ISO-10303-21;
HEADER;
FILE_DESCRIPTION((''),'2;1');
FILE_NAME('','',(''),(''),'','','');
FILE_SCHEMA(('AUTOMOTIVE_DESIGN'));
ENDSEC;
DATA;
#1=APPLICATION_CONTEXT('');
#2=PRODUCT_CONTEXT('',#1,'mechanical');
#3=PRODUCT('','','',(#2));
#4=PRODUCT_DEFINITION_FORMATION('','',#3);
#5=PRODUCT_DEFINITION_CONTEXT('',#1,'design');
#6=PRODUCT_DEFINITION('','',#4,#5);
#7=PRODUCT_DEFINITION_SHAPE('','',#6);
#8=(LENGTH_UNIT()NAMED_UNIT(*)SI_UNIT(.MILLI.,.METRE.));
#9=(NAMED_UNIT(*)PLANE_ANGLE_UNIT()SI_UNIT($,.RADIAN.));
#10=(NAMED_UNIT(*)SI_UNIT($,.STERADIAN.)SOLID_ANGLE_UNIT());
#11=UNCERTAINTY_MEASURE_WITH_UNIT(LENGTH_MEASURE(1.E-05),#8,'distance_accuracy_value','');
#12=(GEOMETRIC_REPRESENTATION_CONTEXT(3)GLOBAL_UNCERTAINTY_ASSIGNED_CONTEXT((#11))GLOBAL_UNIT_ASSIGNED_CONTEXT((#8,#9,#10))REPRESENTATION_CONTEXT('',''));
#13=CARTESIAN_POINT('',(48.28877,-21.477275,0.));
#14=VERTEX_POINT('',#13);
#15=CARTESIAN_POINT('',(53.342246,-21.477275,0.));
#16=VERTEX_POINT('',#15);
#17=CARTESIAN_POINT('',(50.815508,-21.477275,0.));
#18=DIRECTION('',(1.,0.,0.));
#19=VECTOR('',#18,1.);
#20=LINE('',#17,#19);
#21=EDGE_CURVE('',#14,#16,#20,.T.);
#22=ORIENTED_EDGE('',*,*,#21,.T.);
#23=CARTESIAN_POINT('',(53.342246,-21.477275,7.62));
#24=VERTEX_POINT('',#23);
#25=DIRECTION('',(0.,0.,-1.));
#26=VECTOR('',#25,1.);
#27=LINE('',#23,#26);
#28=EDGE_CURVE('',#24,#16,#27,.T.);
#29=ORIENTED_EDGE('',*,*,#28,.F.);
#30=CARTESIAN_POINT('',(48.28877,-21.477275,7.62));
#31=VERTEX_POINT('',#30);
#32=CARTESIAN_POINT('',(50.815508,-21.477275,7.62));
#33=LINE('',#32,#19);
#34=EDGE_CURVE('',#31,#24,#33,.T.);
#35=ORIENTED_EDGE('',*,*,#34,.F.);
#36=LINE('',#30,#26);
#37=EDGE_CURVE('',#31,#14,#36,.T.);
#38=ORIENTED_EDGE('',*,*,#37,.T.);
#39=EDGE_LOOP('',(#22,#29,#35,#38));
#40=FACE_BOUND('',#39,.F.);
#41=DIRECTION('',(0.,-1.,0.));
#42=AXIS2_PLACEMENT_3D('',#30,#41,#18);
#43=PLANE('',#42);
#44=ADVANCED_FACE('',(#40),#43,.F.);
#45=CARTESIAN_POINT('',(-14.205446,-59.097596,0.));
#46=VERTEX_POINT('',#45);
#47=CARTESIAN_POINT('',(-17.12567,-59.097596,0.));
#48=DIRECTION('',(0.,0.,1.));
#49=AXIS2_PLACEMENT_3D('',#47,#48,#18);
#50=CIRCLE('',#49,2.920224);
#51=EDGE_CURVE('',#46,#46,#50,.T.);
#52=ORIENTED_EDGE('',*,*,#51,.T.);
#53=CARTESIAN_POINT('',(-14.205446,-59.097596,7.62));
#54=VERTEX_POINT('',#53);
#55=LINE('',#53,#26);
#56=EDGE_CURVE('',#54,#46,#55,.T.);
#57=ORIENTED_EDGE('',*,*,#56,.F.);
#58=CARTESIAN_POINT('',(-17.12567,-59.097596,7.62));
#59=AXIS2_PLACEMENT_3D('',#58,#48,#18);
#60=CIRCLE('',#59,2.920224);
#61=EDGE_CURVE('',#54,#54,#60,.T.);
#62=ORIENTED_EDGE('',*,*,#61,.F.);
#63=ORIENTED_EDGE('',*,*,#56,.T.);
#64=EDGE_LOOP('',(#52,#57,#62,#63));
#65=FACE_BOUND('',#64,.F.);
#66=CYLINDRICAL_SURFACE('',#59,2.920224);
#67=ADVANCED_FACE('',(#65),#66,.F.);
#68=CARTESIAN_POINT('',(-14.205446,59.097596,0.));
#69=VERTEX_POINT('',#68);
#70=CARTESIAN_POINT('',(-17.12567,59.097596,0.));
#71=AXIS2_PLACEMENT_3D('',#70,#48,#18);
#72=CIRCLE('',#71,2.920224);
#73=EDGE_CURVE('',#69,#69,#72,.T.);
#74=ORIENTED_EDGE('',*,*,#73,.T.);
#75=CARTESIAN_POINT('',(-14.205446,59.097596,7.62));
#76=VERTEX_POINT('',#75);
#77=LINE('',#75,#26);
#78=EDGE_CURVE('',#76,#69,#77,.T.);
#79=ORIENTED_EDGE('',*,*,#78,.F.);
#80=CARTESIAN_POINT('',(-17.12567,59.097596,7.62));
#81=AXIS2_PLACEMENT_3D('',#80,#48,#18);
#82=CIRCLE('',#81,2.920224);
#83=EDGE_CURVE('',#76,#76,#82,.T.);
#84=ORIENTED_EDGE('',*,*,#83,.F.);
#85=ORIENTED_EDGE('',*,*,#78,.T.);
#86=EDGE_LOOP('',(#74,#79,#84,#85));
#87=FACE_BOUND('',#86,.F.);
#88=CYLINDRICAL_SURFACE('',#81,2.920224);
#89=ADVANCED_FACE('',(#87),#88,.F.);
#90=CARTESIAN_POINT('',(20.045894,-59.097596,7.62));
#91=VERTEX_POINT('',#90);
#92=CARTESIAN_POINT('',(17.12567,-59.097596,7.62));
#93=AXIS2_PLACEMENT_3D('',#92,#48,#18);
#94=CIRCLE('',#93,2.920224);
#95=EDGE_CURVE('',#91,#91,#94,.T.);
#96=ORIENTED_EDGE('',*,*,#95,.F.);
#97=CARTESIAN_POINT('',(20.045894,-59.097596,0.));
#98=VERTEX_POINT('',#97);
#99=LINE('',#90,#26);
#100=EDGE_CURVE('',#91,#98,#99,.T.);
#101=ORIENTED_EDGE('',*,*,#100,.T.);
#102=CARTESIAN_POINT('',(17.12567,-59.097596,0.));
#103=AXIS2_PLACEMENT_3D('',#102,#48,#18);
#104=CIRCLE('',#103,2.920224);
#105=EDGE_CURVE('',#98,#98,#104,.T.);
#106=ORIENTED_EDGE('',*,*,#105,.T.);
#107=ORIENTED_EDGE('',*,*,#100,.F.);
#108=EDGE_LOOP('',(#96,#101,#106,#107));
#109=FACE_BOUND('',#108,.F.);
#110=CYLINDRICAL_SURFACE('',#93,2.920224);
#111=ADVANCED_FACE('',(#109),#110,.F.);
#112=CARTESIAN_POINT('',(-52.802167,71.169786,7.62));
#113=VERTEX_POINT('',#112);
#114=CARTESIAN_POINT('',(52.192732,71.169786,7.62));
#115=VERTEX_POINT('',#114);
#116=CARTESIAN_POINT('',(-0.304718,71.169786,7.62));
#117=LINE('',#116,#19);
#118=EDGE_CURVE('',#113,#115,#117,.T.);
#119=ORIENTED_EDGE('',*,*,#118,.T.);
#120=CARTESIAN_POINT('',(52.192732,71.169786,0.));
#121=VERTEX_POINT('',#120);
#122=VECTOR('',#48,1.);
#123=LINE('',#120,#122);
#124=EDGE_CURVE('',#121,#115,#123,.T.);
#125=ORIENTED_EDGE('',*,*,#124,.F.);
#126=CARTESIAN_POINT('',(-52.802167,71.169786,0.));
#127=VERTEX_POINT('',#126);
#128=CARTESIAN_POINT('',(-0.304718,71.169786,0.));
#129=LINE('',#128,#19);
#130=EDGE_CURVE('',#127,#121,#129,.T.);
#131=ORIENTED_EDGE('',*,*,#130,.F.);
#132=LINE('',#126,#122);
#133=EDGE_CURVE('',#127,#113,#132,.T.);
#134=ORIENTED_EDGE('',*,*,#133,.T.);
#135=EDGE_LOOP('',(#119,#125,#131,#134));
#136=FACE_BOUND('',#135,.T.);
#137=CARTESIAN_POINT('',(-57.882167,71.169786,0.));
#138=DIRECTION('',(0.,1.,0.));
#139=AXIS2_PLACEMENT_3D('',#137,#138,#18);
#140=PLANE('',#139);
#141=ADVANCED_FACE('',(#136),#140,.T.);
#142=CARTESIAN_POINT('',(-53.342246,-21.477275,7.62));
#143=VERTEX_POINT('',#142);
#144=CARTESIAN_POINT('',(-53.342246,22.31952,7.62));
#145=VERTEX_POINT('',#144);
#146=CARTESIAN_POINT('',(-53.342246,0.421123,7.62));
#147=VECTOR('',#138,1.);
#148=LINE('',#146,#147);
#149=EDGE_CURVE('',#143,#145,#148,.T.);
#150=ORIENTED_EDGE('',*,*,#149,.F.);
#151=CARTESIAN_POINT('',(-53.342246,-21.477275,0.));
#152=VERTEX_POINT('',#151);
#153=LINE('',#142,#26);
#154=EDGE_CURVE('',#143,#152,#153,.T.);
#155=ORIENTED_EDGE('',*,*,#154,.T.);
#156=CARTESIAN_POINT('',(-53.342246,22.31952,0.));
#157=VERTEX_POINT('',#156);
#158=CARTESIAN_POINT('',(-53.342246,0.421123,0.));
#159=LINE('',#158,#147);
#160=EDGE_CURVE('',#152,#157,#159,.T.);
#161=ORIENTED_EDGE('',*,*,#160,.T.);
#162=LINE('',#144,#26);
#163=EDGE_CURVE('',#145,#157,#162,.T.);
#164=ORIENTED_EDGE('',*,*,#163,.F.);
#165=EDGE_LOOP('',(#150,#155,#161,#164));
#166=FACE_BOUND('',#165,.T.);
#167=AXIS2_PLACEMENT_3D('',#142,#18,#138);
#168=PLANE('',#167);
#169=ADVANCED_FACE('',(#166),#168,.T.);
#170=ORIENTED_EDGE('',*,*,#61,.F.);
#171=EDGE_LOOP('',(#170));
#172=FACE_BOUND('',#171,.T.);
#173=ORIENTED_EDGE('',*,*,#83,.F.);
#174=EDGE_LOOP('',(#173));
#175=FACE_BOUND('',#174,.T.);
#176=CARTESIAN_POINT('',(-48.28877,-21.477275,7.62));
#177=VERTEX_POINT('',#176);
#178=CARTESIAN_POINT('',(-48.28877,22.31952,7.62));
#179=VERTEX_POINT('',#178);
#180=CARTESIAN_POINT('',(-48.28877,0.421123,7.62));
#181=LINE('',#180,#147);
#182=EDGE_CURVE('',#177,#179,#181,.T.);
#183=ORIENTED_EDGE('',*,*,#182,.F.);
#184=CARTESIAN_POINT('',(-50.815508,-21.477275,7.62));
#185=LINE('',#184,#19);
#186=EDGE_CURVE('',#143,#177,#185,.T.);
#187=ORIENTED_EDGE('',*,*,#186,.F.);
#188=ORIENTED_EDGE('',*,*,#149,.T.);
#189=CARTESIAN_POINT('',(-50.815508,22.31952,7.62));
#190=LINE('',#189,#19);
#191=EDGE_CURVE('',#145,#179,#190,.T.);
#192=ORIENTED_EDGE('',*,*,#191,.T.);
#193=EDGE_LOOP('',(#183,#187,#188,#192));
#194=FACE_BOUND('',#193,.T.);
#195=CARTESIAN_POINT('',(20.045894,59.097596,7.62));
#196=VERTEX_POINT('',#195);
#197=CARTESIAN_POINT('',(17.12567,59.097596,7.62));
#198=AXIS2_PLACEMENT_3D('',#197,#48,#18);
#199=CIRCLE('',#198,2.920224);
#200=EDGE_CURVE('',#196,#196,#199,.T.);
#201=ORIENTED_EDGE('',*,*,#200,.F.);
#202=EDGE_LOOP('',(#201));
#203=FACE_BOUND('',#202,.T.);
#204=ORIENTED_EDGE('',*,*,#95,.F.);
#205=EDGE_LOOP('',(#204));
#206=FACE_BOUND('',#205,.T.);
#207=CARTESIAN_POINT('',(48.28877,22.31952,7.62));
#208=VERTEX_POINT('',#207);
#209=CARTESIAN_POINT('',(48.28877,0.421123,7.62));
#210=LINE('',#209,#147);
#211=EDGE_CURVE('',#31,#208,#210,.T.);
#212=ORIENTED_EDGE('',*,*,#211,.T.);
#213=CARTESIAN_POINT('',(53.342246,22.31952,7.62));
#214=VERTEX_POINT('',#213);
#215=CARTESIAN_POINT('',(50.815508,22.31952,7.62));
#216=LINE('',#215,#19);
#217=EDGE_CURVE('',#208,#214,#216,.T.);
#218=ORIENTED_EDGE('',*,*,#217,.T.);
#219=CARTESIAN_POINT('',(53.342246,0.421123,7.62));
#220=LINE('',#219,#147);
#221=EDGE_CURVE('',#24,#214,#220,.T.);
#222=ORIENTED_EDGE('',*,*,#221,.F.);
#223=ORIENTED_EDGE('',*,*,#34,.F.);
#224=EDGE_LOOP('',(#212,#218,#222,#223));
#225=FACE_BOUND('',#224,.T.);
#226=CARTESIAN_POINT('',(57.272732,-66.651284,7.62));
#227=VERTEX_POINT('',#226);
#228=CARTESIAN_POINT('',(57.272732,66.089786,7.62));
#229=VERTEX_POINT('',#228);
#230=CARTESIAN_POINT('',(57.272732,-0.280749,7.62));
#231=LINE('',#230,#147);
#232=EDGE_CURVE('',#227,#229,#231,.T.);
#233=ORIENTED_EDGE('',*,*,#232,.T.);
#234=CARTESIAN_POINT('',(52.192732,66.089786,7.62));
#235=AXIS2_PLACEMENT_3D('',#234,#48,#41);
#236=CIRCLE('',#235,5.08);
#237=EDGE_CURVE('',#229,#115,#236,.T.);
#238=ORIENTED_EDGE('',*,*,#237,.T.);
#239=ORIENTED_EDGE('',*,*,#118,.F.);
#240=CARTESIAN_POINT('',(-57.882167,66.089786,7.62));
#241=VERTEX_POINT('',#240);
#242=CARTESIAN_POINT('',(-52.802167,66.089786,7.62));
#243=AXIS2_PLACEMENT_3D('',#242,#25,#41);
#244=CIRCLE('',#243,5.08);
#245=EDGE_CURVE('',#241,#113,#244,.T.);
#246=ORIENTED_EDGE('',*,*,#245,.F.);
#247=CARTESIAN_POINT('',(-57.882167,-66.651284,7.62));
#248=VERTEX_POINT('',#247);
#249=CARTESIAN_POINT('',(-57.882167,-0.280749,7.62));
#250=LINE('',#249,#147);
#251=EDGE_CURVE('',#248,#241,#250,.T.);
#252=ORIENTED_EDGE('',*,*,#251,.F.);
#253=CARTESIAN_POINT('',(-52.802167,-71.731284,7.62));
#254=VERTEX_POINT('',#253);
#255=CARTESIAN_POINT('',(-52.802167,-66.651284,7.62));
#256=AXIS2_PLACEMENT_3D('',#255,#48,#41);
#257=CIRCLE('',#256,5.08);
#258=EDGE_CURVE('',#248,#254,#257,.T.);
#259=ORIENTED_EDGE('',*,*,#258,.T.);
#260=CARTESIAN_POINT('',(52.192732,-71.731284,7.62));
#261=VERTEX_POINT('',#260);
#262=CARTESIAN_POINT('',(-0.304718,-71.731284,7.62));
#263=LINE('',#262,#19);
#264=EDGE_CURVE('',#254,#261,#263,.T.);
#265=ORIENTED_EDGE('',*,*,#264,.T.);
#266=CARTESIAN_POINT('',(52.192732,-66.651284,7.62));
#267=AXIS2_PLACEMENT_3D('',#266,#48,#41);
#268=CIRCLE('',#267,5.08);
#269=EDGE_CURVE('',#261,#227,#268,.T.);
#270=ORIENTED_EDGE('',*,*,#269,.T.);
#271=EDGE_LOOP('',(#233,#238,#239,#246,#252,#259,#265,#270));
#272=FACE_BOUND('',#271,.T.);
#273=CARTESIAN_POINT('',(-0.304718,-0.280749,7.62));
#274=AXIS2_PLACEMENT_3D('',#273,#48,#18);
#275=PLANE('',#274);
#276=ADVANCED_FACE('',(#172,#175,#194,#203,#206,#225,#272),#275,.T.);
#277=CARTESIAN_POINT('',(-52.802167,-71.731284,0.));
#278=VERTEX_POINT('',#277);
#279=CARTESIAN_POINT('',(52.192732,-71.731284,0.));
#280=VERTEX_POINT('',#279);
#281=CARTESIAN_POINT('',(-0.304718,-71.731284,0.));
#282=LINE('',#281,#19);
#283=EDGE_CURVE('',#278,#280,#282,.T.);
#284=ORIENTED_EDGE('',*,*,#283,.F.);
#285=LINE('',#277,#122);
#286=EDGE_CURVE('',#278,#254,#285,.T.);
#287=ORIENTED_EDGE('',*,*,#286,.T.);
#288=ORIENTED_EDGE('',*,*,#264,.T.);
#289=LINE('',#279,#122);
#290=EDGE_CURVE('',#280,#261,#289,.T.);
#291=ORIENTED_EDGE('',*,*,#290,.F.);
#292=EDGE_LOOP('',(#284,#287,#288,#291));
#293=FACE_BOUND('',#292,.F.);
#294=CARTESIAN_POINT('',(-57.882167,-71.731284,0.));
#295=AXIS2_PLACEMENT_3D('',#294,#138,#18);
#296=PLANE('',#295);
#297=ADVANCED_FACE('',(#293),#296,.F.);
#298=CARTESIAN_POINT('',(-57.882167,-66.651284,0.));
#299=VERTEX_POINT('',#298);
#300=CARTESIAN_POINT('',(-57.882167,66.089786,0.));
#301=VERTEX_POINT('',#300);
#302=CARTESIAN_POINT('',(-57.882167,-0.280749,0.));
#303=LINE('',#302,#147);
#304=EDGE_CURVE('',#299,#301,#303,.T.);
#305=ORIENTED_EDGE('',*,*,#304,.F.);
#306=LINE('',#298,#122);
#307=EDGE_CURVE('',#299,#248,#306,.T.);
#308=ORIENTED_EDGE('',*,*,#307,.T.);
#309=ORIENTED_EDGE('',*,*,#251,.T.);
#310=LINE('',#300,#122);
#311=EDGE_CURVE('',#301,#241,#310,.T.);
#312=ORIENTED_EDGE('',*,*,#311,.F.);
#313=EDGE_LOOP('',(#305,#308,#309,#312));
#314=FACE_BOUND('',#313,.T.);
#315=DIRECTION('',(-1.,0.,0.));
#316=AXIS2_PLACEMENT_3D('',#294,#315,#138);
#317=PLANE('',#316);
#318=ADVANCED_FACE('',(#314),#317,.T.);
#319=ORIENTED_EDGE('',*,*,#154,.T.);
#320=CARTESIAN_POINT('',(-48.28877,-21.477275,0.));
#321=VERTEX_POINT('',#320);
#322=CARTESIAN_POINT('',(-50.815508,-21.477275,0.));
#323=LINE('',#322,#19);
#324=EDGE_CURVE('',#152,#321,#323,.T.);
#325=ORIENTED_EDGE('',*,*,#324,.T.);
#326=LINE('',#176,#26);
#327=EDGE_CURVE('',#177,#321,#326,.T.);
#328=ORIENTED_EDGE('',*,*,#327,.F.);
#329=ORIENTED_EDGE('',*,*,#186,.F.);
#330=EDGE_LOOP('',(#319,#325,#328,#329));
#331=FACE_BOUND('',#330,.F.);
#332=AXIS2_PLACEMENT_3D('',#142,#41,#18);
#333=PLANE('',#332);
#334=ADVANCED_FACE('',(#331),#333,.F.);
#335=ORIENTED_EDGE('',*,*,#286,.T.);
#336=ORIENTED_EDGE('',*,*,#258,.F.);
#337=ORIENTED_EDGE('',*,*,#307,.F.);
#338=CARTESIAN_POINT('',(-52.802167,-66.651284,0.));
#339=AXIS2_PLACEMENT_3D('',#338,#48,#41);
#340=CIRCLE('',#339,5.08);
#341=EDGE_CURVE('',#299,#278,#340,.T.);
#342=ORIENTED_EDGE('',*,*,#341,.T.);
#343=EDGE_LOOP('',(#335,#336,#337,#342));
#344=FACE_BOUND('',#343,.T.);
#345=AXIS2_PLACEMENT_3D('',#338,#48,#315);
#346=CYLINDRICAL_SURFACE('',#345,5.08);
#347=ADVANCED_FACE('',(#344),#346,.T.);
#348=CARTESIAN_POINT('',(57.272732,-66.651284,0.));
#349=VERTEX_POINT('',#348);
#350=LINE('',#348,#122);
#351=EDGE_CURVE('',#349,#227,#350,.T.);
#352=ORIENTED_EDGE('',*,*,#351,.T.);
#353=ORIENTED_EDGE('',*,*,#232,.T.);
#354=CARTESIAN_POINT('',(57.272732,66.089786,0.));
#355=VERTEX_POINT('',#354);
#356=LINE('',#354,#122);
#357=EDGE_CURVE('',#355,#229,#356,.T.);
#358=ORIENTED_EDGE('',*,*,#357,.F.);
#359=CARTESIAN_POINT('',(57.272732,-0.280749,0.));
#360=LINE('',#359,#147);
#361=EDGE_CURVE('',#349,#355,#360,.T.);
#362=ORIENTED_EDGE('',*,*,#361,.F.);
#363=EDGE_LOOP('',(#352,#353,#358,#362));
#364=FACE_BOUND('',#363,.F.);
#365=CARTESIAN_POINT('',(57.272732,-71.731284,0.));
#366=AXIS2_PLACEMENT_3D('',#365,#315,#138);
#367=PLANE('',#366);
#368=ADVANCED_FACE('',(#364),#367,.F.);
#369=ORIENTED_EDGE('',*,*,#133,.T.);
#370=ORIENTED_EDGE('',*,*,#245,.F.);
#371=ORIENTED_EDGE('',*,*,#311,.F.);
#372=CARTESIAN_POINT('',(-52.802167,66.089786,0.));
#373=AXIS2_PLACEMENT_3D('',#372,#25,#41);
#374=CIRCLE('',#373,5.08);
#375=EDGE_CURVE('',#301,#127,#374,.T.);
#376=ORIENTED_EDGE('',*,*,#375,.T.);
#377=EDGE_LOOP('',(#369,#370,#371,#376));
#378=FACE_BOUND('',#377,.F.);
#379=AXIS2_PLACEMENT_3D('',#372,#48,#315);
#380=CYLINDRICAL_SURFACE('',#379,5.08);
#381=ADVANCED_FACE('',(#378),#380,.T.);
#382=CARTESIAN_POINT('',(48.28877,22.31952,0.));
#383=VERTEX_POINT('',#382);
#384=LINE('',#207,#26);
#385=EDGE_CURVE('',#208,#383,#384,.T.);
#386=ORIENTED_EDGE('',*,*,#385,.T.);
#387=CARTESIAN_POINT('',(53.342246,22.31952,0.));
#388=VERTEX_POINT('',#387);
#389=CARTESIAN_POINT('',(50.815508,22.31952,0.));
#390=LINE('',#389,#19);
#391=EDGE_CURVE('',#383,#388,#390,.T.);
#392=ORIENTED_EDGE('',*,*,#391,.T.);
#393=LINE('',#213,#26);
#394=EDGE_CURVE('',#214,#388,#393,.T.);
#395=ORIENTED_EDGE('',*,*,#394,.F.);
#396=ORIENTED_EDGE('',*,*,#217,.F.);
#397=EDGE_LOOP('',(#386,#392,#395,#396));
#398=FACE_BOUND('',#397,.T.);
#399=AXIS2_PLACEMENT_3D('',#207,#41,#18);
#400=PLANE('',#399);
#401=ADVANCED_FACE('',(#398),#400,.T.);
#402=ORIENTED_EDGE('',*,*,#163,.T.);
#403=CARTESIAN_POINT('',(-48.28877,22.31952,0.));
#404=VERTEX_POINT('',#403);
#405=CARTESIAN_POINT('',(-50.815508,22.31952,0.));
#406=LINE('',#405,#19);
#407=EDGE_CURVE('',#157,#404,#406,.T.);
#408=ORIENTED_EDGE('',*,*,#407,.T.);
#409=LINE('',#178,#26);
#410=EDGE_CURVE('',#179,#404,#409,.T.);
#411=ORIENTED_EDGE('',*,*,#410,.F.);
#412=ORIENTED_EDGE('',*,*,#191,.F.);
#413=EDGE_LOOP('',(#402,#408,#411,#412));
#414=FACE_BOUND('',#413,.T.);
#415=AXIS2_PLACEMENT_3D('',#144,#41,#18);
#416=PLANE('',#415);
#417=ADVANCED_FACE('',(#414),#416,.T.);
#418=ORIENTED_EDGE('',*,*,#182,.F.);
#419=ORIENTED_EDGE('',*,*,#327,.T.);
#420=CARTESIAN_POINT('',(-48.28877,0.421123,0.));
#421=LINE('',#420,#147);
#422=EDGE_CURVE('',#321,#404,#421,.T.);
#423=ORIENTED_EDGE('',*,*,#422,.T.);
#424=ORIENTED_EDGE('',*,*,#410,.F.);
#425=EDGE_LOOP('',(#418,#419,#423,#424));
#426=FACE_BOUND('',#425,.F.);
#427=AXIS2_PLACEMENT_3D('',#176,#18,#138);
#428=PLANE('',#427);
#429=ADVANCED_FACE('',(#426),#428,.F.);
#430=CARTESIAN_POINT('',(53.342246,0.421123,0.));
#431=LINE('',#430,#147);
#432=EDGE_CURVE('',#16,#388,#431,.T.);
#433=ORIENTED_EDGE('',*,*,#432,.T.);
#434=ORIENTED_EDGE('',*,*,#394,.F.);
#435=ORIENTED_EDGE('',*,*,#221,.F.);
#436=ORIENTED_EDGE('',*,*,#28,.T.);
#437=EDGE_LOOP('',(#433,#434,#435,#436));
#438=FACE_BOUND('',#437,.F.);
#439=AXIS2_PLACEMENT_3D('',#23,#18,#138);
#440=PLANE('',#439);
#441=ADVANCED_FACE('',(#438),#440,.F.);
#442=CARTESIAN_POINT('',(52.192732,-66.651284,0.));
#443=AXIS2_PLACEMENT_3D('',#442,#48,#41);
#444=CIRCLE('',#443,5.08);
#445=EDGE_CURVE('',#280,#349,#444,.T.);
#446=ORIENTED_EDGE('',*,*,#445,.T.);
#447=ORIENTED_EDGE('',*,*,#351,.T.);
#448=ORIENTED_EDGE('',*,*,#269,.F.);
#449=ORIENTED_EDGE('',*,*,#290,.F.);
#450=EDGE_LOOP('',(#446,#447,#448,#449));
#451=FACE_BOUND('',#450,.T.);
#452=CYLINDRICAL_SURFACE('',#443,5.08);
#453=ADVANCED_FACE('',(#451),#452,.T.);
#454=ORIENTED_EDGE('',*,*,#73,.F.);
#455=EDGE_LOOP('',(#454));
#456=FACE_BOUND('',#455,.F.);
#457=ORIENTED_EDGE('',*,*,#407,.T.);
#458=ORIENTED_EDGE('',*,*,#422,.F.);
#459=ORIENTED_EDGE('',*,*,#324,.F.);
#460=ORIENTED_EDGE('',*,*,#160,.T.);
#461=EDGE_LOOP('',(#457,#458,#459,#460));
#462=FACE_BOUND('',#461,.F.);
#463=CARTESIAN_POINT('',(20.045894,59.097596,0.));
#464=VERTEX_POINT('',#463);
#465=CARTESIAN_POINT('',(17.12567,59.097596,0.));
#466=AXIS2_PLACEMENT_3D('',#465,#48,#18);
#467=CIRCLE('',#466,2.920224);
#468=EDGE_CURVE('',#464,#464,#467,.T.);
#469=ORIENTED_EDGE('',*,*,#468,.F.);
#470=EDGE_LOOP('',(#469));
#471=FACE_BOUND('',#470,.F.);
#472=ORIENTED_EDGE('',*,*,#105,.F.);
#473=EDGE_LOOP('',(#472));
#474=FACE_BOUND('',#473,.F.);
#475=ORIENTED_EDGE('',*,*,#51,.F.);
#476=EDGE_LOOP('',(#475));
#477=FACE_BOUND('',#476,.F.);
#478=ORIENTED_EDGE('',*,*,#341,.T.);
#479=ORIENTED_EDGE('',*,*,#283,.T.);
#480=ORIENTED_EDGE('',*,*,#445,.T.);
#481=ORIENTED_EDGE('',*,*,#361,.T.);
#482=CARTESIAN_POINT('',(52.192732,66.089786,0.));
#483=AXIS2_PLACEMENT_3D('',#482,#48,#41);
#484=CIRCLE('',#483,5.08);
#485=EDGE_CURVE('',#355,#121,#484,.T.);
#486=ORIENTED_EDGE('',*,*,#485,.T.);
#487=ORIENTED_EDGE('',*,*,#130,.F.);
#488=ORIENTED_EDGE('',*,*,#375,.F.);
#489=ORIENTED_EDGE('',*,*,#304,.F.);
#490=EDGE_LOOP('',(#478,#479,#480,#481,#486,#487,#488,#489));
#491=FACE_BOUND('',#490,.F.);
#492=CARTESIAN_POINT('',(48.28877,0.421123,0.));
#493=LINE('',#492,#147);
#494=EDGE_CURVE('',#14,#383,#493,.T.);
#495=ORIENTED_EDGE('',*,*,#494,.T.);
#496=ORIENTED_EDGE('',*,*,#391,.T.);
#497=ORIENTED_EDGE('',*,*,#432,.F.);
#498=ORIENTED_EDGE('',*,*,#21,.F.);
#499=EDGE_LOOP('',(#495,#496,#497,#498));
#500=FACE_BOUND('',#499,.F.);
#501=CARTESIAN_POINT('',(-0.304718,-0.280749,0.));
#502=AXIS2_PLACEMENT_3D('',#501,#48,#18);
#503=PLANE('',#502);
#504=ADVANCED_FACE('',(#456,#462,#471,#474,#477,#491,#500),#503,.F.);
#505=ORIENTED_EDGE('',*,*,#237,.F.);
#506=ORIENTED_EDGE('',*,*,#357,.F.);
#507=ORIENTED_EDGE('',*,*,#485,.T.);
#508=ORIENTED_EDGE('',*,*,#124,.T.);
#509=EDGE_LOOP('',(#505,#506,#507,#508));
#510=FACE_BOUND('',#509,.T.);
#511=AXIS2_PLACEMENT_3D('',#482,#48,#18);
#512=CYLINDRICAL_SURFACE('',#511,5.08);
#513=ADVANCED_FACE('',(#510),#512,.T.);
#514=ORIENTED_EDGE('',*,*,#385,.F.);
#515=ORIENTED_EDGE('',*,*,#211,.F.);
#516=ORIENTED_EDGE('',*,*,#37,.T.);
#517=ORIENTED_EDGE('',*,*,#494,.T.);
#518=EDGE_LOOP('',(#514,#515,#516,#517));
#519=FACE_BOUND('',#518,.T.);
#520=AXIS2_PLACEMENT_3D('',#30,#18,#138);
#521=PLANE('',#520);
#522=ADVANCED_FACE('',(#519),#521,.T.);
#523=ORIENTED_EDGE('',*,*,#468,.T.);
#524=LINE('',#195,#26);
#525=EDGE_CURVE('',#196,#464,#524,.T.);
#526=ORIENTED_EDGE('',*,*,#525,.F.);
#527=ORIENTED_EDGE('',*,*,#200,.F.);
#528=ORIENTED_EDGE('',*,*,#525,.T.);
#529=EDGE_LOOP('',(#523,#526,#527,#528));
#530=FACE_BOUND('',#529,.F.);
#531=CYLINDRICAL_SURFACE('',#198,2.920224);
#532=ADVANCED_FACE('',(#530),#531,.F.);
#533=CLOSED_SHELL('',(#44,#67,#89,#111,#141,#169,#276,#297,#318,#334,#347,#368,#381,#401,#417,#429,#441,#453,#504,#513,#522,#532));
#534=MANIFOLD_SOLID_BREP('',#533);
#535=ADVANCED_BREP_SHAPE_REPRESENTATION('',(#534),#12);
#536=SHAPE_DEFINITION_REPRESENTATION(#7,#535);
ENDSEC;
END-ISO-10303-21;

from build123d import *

# Parameters (mm, degrees)
F0_W     = 115.1548996568
F0_H     = 142.901070416
F1_DEPTH = 7.62
F2_R     = 5.08
F3_W     = 5.0534754992
F3_H     = 43.796794489
F3_R     = 2.9202239124
F4_DEPTH = 7.62


# Not quite as in the source:
# - a feature names something its author has since deleted; it is built from what else it names


with BuildPart() as f1:
    # F0 (on Top) → F1 (new body)
    with BuildSketch(Plane.XY):
        with Locations((-0.3047175705, -0.2807490528)):
            Rectangle(F0_W, F0_H)
    extrude(amount=F1_DEPTH)

    # F2
    f2_edges = [f1.edges().sort_by_distance(p)[0] for p in [
        (-57.882167, -71.731284, 3.81),
        (-57.882167, 71.169786, 3.81),
        (57.272732, -71.731284, 3.81),
        (57.272732, 71.169786, 3.81),
    ]]
    fillet(f2_edges, radius=F2_R)

    # F3 (on face) + F0 (on Top) → F4 (cut)
    with BuildSketch(Plane.XY.offset(7.62)):
        with Locations((-50.8155077696, 0.4211226478)):
            Rectangle(F3_W, F3_H)
        with Locations((17.1256698668, 59.0975955129)):
            Circle(F3_R)
        with Locations((50.8155077696, 0.4211226478)):
            Rectangle(F3_W, F3_H)
        with Locations((-17.1256698668, 59.0975955129)):
            Circle(F3_R)
        with Locations((-17.1256698668, -59.0975955129)):
            Circle(F3_R)
        with Locations((17.1256698668, -59.0975955129)):
            Circle(F3_R)
    with BuildSketch(Plane.XY):
        with Locations((-0.3047175705, -0.2807490528)):
            Rectangle(F0_W, F0_H)
    extrude(amount=-F4_DEPTH, mode=Mode.SUBTRACT)


solid = f1.part
